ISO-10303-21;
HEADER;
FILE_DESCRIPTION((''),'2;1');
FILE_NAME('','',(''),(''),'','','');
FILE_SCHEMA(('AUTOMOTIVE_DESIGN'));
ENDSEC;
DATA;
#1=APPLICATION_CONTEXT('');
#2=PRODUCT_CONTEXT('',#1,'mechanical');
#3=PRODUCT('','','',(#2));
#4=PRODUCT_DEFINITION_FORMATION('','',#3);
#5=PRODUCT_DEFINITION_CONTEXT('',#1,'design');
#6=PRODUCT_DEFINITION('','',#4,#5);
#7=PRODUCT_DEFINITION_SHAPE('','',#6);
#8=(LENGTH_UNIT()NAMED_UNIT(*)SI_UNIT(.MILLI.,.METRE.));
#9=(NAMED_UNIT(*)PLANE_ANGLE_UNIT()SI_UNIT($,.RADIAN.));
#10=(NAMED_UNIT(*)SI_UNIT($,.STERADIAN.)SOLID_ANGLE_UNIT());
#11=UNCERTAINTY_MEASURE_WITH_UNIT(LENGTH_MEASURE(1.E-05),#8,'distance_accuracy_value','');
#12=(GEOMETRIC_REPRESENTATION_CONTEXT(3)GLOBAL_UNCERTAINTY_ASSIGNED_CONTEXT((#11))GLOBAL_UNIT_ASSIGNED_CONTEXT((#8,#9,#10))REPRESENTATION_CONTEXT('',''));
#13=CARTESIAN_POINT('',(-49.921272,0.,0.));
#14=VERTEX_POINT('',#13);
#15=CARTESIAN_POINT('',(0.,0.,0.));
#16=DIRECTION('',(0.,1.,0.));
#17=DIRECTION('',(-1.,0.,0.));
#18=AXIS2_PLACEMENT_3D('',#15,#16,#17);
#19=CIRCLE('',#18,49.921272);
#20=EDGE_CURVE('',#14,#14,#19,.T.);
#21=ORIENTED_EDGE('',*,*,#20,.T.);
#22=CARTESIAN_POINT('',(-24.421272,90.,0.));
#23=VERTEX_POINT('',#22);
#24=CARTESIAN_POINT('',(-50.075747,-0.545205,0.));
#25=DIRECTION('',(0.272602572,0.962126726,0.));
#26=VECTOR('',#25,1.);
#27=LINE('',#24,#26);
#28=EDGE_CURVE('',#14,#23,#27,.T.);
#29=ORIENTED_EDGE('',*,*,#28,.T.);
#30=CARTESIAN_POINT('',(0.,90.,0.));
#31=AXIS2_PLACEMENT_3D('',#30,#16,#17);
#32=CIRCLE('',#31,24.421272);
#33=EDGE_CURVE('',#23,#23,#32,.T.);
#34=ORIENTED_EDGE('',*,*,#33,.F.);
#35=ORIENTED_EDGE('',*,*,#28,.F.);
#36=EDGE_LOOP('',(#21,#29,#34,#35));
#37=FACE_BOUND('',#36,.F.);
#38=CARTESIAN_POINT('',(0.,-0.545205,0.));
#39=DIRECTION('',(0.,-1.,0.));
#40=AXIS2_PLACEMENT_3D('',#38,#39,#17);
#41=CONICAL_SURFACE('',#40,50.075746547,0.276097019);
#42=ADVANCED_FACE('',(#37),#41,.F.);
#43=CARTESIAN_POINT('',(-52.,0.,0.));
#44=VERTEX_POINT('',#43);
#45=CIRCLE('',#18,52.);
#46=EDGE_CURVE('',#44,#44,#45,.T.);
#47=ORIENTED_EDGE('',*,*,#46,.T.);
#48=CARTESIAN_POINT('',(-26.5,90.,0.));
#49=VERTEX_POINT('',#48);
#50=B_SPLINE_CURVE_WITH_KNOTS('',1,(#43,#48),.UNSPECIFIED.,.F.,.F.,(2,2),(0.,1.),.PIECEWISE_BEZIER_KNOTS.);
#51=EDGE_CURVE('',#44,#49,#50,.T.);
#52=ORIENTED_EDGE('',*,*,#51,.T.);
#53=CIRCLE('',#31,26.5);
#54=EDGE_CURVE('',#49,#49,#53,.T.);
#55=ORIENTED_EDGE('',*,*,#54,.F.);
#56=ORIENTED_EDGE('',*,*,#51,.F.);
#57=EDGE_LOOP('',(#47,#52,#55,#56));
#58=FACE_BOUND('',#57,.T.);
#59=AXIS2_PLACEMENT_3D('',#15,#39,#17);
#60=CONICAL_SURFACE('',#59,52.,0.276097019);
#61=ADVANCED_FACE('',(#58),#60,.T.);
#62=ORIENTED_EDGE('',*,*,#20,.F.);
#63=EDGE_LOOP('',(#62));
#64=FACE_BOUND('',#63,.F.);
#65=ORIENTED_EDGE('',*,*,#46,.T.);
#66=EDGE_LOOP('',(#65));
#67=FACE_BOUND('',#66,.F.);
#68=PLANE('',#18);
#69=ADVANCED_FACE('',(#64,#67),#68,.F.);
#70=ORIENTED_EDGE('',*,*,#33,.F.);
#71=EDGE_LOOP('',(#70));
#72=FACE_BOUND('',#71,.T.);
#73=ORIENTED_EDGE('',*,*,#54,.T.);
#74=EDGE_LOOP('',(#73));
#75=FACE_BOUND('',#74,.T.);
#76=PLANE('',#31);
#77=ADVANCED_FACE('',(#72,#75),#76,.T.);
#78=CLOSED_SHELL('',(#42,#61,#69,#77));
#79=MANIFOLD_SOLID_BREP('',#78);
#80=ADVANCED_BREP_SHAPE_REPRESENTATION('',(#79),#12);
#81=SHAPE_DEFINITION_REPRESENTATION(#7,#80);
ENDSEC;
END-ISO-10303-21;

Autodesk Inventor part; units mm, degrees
ref_plane "YZ Plane" through (0, 0, 0) normal (1, 0, 0) x (0, 1, 0)
ref_plane "XY Plane" through (0, 0, 0) normal (0, 0, 1) x (1, 0, 0)
sketch "Szkic6" plane through (0, 0, 0) normal (0, 1, 0) x (-1, 0, 0)
  circle A0 centre (0, 0) radius 52
  dimension "d33" = 104
ref_plane "Płaszczyzna konstrukcyjna1" through (0, 90, 0) normal (0, 1, 0) x (-1, 0, 0)
sketch "Szkic7" plane through (0, 90, 0) normal (0, 1, 0) x (-1, 0, 0)
  circle A0 centre (0, 0) radius 26.5
  dimension "d35" = 53
loft "Wyciągnięcie złożone1" add profiles "Szkic6", "Szkic7"
shell "Skorupa1" thickness 2 removed faces 2 at (-1.8199, 90, -2.5499) at (-18.5271, 0, 25.061)
equation "\"d33\" = OD1"
equation "\"d35\" = OD2"
equation "\"d52\" = THK"
equation "\"SzerokośćGięciaPodcięcia\" = Grubość"
equation "\"RozmiarPodcięciaNarożnika\" = 4 * Grubość"
equation "\"PromieńPrzejścia\" = PromieńGięcia"
equation "\"Rozmiar_promienia_Jacobiego\" = PromieńGięcia"
equation "\"Wielk_odstępu\" = Grubość"
equation "\"d2\" = PromieńGięcia"
equation "\"d23\" = PromieńGięcia"
equation "\"OD1\" = 104"
equation "\"OD2\" = 53"
equation "\"THK\" = 2"
equation "\"Grubość\" = 1.5"
equation "\"PromieńGięcia\" = 3"
properties part number "Redukcja symetryczna Ø104x53x2 L=90" material "304"
